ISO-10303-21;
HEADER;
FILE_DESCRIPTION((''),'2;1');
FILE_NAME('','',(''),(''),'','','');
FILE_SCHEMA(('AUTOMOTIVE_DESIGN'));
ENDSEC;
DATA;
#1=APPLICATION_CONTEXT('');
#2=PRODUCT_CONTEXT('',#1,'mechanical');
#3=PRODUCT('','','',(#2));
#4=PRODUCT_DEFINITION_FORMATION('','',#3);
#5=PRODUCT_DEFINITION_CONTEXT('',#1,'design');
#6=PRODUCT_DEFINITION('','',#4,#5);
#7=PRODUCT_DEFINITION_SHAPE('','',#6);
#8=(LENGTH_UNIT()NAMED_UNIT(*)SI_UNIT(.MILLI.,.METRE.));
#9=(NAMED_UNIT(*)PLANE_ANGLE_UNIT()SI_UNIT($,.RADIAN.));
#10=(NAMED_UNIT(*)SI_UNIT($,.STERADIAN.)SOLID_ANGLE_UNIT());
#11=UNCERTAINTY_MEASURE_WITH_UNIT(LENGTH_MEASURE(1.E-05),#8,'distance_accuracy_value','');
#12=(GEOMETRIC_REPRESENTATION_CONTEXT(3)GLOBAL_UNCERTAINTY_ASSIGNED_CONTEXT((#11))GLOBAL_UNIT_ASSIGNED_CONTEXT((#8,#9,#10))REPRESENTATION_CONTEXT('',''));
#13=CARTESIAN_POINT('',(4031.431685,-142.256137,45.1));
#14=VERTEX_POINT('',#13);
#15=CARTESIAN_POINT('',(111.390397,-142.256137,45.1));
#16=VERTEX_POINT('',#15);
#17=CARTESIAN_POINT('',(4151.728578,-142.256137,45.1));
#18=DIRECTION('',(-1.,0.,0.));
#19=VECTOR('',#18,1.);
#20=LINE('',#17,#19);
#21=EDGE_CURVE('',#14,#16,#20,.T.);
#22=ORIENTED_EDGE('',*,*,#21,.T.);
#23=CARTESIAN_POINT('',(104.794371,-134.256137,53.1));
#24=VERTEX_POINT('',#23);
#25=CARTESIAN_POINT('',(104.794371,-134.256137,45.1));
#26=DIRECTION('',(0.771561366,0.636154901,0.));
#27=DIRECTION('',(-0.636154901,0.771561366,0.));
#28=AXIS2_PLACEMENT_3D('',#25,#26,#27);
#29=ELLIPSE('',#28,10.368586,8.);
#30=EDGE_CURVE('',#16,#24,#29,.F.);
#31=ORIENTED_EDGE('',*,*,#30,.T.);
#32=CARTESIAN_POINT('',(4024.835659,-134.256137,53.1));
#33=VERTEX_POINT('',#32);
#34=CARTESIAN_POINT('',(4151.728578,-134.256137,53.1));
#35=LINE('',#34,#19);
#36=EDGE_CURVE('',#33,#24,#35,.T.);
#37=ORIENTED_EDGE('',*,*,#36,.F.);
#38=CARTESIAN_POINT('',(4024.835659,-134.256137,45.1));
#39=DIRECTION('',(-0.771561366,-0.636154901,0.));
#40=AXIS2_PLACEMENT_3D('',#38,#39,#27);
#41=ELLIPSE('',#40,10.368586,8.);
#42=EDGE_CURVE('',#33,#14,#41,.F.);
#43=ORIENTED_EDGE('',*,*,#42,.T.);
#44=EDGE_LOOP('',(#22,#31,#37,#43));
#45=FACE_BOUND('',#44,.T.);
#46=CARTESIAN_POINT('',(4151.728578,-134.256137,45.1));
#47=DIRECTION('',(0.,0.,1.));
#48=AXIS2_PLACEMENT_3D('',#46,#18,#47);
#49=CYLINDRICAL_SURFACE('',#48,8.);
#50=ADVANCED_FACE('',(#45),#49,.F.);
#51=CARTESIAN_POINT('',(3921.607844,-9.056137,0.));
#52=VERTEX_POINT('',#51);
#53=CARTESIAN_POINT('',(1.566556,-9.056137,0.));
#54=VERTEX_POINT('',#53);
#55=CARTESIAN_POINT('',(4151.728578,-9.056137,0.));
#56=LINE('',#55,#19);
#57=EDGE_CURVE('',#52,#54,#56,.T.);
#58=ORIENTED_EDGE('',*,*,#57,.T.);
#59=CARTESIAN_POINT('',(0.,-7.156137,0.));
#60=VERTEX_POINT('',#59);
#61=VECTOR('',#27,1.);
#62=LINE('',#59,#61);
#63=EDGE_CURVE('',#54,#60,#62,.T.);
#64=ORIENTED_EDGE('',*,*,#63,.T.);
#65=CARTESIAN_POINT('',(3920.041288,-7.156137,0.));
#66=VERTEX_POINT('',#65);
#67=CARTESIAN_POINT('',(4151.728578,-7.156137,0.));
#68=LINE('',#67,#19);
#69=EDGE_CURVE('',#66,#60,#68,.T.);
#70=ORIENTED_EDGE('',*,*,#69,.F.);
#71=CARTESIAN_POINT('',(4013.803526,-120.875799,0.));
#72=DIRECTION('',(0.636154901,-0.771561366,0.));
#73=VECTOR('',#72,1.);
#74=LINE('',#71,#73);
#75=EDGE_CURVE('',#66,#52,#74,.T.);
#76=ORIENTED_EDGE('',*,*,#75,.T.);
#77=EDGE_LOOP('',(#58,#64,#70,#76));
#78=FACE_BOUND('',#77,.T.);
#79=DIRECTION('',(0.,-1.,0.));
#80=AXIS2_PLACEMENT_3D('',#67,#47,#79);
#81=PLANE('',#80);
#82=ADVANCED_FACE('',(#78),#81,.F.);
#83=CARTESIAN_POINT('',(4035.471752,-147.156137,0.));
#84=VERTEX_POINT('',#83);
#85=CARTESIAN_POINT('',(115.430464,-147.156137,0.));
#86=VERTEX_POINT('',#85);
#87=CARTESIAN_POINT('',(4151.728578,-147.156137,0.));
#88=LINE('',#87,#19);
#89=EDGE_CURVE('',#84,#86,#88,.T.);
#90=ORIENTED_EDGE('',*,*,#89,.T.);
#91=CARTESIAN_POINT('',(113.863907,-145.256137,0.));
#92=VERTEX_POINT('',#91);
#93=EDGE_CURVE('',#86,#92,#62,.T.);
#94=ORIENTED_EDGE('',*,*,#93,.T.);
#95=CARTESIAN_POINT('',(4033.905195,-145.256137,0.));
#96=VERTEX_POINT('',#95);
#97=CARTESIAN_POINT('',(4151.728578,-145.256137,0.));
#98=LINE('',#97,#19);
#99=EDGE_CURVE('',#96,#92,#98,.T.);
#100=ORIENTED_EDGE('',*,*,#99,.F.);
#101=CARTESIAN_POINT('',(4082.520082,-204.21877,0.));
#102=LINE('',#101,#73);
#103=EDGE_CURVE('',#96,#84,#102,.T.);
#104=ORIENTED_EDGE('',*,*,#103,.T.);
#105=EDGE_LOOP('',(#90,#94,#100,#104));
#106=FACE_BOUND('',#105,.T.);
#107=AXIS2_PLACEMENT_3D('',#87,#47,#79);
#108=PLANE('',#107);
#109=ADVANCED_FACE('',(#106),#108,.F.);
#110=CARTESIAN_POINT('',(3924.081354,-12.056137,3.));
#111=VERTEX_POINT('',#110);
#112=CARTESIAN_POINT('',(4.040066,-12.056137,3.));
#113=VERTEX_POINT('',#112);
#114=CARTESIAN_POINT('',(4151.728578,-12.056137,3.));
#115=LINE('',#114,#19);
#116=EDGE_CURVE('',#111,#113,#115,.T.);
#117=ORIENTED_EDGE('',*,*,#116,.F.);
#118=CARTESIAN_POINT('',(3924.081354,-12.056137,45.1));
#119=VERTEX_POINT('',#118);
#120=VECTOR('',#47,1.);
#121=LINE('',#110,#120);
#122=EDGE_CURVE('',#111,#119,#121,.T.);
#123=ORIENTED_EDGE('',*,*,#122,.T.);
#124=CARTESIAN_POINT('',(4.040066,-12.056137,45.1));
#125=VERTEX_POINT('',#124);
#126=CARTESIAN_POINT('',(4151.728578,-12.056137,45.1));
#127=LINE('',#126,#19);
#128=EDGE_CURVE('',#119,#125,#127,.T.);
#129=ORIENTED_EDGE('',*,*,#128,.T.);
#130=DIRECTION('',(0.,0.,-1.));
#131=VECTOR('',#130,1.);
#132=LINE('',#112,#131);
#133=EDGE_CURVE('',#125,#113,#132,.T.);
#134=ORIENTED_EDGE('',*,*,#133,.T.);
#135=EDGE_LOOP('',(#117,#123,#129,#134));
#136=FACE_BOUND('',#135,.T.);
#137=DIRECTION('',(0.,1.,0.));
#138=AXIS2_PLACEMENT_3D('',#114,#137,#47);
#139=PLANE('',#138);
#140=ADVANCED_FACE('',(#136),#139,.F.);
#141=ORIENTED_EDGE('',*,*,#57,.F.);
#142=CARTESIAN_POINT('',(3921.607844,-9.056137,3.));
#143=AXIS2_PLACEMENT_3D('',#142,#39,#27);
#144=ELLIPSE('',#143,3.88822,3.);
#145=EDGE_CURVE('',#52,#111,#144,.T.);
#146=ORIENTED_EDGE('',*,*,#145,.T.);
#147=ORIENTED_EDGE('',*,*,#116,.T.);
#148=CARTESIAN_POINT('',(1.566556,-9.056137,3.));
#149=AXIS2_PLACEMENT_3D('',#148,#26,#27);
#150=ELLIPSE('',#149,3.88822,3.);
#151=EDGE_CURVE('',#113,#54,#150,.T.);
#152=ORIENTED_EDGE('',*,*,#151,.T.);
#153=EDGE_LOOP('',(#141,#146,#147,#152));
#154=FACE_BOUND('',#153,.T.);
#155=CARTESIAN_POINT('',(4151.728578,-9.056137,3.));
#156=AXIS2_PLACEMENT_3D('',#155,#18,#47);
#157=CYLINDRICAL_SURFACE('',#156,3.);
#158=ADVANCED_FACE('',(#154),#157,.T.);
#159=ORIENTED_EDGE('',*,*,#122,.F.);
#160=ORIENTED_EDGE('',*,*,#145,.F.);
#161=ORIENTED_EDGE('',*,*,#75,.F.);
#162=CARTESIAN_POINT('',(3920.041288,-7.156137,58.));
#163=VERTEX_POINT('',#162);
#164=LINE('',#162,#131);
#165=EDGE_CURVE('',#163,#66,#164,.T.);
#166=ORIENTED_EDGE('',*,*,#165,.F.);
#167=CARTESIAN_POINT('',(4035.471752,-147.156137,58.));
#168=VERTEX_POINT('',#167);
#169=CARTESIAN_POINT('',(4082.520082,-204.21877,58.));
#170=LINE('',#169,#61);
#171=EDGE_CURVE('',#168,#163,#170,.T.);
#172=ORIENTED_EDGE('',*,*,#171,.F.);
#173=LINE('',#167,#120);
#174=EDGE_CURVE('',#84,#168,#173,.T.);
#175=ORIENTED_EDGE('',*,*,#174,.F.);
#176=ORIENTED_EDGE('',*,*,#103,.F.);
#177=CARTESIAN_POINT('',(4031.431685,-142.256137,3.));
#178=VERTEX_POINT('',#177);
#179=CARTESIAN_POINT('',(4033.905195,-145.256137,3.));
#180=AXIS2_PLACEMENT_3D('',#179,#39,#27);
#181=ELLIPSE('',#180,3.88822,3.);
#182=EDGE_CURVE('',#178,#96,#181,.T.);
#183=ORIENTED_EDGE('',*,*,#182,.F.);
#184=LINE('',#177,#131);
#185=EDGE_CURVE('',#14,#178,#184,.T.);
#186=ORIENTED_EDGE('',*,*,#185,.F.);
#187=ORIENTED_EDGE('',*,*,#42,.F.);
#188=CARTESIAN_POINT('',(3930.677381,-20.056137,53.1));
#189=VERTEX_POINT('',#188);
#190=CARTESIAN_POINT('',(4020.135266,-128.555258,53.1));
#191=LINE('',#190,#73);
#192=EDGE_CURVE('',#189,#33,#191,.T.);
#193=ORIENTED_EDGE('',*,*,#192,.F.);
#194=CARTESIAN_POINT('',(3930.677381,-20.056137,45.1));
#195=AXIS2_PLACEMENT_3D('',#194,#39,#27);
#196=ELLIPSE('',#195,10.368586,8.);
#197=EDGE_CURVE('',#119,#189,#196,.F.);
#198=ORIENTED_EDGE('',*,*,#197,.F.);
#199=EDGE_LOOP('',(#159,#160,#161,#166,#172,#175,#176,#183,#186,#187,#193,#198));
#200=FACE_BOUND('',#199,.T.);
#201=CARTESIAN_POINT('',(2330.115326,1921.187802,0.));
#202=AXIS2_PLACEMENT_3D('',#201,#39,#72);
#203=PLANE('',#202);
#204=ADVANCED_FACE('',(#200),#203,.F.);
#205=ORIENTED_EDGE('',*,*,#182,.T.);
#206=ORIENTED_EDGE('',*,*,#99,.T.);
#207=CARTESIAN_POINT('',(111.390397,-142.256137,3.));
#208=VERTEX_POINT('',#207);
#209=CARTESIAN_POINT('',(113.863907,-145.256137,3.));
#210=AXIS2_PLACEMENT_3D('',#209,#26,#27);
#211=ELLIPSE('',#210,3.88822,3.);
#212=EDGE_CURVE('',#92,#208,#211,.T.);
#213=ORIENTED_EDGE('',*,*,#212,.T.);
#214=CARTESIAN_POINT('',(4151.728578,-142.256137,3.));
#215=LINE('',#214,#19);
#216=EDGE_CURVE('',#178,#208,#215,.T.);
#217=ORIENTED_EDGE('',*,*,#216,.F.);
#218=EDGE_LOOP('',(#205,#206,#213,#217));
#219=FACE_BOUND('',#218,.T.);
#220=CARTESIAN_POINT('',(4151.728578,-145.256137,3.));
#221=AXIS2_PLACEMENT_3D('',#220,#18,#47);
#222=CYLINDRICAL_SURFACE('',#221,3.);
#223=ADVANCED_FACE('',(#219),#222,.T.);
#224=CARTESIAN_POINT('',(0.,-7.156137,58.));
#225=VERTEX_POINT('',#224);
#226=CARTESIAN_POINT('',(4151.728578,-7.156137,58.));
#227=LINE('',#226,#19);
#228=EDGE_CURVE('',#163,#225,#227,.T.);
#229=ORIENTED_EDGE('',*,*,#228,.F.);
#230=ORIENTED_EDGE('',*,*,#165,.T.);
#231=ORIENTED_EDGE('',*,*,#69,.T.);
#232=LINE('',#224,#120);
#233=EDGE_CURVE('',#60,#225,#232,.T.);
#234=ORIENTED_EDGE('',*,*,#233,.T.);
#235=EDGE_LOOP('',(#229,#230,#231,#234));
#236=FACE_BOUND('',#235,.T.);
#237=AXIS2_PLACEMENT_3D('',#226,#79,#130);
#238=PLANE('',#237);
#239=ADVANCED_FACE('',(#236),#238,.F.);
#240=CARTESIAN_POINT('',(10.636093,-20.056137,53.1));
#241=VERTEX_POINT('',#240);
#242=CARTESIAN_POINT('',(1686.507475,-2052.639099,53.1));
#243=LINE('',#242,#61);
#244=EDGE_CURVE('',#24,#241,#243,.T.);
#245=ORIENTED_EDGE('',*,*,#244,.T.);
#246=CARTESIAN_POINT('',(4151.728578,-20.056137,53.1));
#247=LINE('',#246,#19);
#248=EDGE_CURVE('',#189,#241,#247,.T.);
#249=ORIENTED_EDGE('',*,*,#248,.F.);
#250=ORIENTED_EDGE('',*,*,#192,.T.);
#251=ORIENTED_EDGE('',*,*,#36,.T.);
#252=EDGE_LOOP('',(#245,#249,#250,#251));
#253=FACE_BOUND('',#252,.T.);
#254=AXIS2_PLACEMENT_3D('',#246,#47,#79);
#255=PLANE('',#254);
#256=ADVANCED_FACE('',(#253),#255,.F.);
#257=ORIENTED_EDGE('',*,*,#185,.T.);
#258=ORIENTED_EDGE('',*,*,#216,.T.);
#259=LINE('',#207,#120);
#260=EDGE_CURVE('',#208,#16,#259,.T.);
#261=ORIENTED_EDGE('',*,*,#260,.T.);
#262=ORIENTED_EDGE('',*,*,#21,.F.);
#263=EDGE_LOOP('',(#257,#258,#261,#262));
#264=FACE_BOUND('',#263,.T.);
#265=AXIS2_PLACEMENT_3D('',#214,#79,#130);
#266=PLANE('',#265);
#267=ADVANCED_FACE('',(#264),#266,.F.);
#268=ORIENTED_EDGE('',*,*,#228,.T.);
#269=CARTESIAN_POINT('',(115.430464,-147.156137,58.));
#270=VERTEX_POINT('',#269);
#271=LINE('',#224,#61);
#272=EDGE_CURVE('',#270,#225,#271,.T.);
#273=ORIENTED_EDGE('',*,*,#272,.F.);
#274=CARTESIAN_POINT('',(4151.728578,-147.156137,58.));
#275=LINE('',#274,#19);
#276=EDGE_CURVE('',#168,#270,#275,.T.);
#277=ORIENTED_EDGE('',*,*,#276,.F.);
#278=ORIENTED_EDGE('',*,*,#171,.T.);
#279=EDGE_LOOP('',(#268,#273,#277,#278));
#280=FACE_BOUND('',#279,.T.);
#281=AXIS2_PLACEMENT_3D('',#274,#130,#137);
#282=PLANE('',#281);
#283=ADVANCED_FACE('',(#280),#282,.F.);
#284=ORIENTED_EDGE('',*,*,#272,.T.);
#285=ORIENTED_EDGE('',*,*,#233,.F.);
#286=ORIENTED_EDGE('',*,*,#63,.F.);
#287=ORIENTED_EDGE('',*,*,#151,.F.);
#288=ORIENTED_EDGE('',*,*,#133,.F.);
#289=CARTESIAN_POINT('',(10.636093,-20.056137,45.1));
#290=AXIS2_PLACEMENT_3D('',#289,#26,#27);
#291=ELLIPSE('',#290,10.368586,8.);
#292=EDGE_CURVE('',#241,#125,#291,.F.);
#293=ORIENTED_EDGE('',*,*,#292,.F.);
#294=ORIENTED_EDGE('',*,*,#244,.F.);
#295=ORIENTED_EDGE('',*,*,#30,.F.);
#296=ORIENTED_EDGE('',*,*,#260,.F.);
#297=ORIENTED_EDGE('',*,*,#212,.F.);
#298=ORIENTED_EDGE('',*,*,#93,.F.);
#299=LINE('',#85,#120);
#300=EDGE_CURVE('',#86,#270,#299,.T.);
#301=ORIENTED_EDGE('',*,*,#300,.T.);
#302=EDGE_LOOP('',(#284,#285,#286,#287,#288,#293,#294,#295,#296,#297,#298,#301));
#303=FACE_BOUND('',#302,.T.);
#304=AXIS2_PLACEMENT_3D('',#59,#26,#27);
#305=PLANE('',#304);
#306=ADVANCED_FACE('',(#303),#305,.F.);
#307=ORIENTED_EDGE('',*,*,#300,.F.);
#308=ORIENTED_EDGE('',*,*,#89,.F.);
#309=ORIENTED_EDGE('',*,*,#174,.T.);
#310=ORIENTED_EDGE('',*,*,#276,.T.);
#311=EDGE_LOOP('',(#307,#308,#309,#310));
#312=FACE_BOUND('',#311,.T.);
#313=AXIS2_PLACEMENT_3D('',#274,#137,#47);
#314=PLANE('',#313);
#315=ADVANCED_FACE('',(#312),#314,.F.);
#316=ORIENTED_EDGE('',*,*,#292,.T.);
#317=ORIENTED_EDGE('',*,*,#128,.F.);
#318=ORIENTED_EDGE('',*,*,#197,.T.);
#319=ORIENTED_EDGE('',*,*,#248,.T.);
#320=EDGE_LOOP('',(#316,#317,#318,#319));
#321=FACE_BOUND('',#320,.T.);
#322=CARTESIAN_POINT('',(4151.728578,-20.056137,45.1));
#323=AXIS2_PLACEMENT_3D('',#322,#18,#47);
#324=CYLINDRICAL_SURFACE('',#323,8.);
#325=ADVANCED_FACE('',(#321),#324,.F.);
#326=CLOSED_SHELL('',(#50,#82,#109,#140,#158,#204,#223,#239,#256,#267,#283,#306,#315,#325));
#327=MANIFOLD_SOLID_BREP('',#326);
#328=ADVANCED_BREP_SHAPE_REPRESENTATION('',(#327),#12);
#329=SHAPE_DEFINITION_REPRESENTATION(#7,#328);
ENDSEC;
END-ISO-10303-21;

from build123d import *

# Parameters (mm, degrees)
EXTRUDE_1_DEPTH       = 4035.471751559
EXTRUDE_START         = 3020
EXTRUDE_1_2_OUTLINE_W = 184
EXTRUDE_1_2_OUTLINE_H = 61
EXTRUDE_1_2_DEPTH     = 90
CUT_EXTRUDE_1_DEPTH   = 4039.570438432


with BuildPart() as part:
    # Бобышка-Вытянуть1: read off the stored shape, not the designer's step
    # Бобышка-Вытянуть1 outline → Бобышка-Вытянуть1 (new body)
    with BuildSketch(Plane(origin=(0, 0, 0), x_dir=(0, 0, -1), z_dir=(1, 0, 0))):
        with BuildLine():
            Line((-58, -7.156136611), (-58, -147.156136611))
            Line((-58, -147.156136611), (0, -147.156136611))
            Line((0, -147.156136611), (0, -145.256136611))
            ThreePointArc((0, -145.256136611), (-0.878679657, -143.134816267), (-3, -142.256136611))
            Line((-3, -142.256136611), (-45.1, -142.256136611))
            ThreePointArc((-45.1, -142.256136611), (-50.75685425, -139.912990861), (-53.1, -134.256136611))
            Line((-53.1, -134.256136611), (-53.1, -20.056136611))
            ThreePointArc((-53.1, -20.056136611), (-50.756854249, -14.399282362), (-45.1, -12.056136611))
            Line((-45.1, -12.056136611), (-3, -12.056136611))
            ThreePointArc((-3, -12.056136611), (-0.878679656, -11.177456955), (0, -9.056136611))
            Line((0, -9.056136611), (0, -7.156136611))
            Line((0, -7.156136611), (-58, -7.156136611))
        make_face()
    extrude(amount=EXTRUDE_1_DEPTH)

    # Extrude 1 2 outline → Extrude 1 2 (cut)
    with BuildSketch(Plane(origin=(0, 0, 0), x_dir=(0.6361549011998189, -0.7715613661138359, 0), z_dir=(0.7715613661138359, 0.636154901199819, 0)).offset(EXTRUDE_START)):
        with Locations((2590, -28.5)):
            Rectangle(EXTRUDE_1_2_OUTLINE_W, EXTRUDE_1_2_OUTLINE_H)
    extrude(amount=EXTRUDE_1_2_DEPTH, mode=Mode.SUBTRACT)

    # Эскиз2 → Вырез-Вытянуть1 (cut, through all)
    with BuildSketch(Plane.XY.offset(58)):
        Polygon((0, -7.156136611), (115.430463576, -147.156136611), (0, -147.156136611), align=None)
    extrude(amount=-CUT_EXTRUDE_1_DEPTH, mode=Mode.SUBTRACT)


solid = part.part
